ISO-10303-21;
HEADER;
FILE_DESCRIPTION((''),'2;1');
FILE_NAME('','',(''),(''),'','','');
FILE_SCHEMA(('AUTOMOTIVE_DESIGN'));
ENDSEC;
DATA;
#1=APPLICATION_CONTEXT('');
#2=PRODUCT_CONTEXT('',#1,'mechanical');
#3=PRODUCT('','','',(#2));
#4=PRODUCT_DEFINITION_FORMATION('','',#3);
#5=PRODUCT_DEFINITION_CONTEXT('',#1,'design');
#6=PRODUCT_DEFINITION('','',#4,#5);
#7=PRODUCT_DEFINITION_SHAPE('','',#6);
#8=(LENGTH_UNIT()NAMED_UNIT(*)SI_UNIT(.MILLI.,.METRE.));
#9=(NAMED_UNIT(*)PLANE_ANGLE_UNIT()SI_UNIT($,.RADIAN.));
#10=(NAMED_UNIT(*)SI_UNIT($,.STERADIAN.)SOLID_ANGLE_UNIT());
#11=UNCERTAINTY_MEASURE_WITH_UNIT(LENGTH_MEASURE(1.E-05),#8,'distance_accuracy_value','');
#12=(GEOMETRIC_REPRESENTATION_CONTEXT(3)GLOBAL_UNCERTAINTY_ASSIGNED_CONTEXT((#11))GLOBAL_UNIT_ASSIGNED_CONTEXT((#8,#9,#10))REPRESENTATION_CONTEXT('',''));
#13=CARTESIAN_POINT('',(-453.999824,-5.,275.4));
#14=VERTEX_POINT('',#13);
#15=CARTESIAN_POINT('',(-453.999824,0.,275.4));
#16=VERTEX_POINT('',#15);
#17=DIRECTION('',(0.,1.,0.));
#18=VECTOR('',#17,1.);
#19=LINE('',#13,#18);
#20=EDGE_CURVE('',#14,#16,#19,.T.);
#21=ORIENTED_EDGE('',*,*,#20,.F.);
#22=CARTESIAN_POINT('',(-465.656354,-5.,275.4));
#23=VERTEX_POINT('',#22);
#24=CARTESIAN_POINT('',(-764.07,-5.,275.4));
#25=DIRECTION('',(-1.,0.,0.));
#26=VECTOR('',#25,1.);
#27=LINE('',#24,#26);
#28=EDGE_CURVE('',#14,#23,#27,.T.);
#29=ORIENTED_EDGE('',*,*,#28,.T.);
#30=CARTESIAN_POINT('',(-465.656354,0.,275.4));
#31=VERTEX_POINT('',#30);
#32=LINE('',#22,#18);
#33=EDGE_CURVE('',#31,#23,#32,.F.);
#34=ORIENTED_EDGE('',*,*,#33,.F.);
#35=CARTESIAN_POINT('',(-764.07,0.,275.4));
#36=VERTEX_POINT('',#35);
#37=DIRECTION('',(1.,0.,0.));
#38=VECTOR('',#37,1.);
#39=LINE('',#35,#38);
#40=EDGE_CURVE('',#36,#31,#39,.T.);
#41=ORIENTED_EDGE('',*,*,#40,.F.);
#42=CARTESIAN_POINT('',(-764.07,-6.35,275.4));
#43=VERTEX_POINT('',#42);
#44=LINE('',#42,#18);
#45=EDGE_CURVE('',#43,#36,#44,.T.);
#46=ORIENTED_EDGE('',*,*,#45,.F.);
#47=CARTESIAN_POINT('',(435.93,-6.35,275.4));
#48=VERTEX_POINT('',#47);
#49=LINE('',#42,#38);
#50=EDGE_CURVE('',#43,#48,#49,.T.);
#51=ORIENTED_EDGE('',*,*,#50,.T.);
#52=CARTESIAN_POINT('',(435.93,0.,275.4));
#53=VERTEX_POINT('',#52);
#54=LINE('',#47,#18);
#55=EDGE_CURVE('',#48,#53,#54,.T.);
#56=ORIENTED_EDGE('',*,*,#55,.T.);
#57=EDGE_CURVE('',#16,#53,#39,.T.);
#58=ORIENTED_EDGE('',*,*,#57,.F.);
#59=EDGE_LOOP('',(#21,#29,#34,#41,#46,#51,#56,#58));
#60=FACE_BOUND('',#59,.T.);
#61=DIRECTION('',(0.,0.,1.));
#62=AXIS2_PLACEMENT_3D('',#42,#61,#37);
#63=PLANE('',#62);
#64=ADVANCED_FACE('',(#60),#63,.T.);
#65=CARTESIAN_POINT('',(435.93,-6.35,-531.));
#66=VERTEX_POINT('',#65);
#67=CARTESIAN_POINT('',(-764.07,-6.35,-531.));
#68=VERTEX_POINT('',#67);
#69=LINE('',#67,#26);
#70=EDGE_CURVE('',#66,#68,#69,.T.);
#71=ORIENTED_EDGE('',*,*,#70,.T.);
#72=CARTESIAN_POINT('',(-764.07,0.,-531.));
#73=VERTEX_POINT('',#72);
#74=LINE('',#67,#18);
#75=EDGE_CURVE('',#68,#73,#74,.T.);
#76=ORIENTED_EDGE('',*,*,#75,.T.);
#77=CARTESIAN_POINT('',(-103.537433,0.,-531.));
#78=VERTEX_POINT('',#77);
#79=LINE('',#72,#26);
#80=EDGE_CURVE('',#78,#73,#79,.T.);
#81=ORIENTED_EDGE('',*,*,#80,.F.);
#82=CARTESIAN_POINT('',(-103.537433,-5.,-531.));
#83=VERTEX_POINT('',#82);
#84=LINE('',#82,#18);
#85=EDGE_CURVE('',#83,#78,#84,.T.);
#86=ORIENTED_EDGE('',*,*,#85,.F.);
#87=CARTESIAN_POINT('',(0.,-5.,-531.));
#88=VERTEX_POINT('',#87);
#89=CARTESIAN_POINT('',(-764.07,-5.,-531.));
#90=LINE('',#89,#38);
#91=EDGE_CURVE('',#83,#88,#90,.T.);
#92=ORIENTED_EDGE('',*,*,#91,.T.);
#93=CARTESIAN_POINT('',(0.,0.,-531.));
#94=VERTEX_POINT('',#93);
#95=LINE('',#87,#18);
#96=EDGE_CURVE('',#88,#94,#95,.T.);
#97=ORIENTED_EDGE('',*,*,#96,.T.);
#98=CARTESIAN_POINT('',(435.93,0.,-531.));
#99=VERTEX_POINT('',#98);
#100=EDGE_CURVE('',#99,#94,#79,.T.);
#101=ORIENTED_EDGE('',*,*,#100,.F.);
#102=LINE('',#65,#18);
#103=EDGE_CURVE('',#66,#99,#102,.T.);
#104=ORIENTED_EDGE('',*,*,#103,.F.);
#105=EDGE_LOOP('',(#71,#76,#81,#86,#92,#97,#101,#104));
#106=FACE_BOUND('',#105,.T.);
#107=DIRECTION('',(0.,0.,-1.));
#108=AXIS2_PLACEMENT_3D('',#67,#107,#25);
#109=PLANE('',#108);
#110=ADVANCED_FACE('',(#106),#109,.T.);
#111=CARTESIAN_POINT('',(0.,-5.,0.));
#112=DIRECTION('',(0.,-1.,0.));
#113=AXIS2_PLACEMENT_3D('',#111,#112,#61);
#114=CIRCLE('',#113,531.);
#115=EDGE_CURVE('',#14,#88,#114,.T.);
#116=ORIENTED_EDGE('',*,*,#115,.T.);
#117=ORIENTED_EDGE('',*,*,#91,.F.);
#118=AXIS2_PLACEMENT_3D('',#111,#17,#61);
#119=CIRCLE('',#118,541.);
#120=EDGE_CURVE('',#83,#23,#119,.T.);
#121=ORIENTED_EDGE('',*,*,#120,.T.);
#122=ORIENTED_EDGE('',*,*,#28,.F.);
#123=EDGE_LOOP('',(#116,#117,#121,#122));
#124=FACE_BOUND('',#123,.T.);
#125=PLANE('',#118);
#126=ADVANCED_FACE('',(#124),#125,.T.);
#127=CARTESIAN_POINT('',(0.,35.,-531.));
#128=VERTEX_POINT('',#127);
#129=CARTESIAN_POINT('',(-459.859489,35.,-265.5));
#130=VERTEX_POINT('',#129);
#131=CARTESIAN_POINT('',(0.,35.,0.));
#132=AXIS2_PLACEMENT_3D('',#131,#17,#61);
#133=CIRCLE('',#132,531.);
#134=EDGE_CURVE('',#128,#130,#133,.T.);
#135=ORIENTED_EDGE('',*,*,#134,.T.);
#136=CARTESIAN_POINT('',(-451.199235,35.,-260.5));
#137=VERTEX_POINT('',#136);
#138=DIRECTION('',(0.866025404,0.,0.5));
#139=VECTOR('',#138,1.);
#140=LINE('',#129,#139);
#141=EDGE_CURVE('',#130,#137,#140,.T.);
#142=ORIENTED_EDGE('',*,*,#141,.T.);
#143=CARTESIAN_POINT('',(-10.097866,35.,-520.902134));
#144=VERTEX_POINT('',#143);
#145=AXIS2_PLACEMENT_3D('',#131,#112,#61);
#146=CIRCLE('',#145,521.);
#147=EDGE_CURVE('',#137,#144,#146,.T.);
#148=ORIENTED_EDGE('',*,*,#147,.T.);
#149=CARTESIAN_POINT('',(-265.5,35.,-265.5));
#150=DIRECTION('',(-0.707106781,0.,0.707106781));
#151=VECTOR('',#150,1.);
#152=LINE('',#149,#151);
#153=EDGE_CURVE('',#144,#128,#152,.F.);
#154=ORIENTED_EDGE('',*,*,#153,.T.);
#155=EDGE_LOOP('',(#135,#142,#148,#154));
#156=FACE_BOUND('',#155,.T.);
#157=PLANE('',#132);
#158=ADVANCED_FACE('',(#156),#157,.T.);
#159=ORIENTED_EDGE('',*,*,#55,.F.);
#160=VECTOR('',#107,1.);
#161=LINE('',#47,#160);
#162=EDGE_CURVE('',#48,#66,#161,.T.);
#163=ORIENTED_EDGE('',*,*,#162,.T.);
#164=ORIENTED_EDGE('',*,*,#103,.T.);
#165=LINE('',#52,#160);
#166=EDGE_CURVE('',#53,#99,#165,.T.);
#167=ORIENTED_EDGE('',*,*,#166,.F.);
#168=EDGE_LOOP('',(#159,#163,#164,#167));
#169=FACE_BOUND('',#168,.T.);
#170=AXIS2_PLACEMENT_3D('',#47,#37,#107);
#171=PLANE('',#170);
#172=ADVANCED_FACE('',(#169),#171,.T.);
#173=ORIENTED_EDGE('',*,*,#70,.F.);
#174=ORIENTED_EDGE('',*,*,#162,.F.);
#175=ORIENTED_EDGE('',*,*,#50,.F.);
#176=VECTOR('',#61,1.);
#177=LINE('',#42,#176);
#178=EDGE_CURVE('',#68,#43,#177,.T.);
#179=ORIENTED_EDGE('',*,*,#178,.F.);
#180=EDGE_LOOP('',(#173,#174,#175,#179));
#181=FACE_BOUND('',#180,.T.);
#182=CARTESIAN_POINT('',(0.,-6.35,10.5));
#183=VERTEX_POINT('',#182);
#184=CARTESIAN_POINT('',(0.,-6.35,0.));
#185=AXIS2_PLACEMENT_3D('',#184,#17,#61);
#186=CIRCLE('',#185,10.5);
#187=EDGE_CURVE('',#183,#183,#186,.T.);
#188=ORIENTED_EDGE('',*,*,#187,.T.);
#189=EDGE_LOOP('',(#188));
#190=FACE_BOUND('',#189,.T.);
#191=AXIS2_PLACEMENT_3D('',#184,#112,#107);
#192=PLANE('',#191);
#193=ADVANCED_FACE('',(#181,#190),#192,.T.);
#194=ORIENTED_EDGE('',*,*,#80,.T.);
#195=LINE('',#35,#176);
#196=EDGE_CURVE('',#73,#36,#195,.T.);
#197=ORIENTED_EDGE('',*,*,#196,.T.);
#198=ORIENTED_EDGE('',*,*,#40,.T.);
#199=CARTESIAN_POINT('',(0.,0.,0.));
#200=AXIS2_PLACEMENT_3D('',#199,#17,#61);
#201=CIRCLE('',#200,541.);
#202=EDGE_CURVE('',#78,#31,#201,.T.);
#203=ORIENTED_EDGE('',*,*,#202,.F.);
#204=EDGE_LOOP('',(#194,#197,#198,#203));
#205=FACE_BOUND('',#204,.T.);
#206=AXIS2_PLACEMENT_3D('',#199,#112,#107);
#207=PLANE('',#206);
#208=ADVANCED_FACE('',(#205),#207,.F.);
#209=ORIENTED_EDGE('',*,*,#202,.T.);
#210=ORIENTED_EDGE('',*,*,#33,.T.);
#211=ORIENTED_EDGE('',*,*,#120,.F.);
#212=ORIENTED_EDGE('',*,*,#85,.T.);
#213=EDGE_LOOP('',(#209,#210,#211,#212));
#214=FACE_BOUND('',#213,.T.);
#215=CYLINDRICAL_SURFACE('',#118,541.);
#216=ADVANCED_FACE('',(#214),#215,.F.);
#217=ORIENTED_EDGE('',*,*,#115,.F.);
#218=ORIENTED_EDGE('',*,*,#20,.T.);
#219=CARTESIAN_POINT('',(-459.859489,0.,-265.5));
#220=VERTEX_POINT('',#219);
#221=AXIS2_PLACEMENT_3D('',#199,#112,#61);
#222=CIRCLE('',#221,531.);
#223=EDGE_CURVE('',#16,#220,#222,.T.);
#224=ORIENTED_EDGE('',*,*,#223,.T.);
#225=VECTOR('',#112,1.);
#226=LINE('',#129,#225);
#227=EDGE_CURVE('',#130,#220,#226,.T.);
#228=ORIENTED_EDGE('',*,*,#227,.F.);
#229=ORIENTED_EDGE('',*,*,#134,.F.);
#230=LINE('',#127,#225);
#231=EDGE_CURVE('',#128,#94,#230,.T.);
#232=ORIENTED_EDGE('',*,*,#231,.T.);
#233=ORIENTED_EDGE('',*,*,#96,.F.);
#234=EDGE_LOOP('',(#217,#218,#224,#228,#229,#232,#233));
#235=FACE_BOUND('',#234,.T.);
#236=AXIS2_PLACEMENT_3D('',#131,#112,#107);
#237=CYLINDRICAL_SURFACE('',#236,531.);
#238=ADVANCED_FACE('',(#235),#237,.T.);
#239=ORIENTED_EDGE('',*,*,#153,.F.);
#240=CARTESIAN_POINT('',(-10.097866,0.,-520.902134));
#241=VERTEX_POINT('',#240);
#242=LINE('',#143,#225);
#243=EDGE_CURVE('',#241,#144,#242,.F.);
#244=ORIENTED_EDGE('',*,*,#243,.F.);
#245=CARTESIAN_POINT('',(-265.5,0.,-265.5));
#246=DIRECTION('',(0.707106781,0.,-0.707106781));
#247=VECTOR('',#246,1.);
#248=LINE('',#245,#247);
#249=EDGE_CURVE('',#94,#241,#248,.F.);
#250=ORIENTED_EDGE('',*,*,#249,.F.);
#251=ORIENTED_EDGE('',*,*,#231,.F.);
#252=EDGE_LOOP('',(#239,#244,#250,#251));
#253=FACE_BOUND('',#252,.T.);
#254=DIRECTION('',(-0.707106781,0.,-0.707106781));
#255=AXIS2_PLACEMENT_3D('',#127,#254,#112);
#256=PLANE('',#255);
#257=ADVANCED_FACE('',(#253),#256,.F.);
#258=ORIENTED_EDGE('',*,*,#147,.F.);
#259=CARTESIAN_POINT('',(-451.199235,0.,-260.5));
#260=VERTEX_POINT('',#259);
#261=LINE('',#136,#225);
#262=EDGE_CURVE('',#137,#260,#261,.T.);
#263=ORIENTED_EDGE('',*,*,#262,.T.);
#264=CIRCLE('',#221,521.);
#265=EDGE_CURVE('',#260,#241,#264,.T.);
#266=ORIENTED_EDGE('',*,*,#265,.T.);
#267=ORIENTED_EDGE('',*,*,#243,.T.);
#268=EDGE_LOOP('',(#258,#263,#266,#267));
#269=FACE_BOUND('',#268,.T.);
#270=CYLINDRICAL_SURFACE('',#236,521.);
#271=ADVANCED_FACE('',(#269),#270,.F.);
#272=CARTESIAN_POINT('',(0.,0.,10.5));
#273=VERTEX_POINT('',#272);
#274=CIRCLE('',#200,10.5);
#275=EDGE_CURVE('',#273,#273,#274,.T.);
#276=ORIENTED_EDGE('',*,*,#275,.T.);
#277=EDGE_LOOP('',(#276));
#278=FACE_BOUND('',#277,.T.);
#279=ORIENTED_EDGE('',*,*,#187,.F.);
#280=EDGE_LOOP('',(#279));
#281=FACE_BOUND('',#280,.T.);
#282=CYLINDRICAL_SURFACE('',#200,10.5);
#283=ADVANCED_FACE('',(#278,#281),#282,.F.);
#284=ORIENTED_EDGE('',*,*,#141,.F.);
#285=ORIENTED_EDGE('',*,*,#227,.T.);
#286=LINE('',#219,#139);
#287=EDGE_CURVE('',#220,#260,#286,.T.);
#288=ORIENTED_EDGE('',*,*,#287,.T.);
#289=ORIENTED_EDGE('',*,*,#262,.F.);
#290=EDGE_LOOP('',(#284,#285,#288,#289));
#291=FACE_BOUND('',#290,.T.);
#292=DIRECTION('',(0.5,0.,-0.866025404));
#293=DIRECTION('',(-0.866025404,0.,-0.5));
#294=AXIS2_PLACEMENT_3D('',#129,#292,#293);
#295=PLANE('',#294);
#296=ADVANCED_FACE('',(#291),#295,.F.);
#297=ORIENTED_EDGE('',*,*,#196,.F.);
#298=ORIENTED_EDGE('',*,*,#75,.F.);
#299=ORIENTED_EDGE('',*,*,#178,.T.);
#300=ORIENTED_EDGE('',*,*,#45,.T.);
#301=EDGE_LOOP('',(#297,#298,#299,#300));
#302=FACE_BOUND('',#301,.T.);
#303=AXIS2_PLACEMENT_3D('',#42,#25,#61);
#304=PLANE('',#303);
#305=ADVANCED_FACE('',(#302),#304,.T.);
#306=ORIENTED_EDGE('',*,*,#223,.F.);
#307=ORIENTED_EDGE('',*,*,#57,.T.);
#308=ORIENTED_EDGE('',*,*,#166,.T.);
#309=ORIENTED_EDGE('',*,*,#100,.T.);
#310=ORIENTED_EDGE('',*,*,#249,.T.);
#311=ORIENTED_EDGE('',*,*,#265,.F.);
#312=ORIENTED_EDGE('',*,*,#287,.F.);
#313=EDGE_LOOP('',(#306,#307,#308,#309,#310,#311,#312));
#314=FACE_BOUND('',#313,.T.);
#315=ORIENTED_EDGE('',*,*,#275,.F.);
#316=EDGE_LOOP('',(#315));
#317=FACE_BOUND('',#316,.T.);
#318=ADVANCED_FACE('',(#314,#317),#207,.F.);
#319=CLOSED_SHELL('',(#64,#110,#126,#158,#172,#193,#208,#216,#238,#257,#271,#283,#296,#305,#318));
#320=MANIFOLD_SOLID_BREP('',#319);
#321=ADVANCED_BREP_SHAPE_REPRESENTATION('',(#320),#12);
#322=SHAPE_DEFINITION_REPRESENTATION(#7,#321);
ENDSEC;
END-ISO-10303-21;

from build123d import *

# Parameters (mm, degrees)
BOSS_EXTRUDE1_DEPTH    = 35
SKETCH4_W              = 1200
SKETCH4_H              = 806.4
BOSS_EXTRUDE2_DEPTH    = 6.35
CHAMFER1_SIZE          = 10
F_20_0MM_DOWEL_HOLE1_D = 21
CUT_EXTRUDE1_START     = -5
CUT_EXTRUDE1_DEPTH     = 5


with BuildPart() as part:
    # Sketch3 → Boss-Extrude1 (new body)
    with BuildSketch(Plane(origin=(0, 0, 0), x_dir=(1, 0, 0), z_dir=(0, 1, 0))):
        with BuildLine():
            Line((0, 531), (0, 521))
            ThreePointArc((0, 521), (-260.5, 451.199235372), (-451.199235372, 260.5))
            Line((-451.199235372, 260.5), (-459.85948941, 265.5))
            ThreePointArc((-459.85948941, 265.5), (-265.5, 459.85948941), (0, 531))
        make_face()
    extrude(amount=BOSS_EXTRUDE1_DEPTH)

    # Sketch4 → Boss-Extrude2 (add)
    with BuildSketch(Plane(origin=(0, 0, 0), x_dir=(1, 0, 0), z_dir=(0, 1, 0))):
        with Locations((-164.07, 127.8)):
            Rectangle(SKETCH4_W, SKETCH4_H)
    extrude(amount=-BOSS_EXTRUDE2_DEPTH)

    # Chamfer1
    # the kernel refuses this chamfer: 10 mm, written as the material it takes off along each edge
    with BuildSketch(Plane(origin=(0, 0, -521), x_dir=(-0.999953038196086, 0, 0.009691305506332204), z_dir=(0, 1, 0))) as chamfer1_piece_1:
        with BuildLine():
            Line((10.098340338, 0), (-CHAMFER1_SIZE * 0.00969130550632, -CHAMFER1_SIZE * 0.999953038196))
            Line((-CHAMFER1_SIZE * 0.00969130550632, -CHAMFER1_SIZE * 0.999953038196), (0, 0))
            ThreePointArc((0, 0), (5.192000536, -0.024447522), (10.098340338, 0))
        make_face()
    extrude(amount=60.969219121, mode=Mode.SUBTRACT)

    # Ø20.0mm Dowel Hole1 (through all)
    with Locations(Plane(origin=(0, 0, 0), x_dir=(1, 0, 0), z_dir=(0, 1, 0))):
        with Locations((0, 0)):
            Hole(F_20_0MM_DOWEL_HOLE1_D / 2)

    # Sketch8 → Cut-Extrude1 (cut)
    with BuildSketch(Plane(origin=(0, 0, 0), x_dir=(1, 0, 0), z_dir=(0, 1, 0)).offset(CUT_EXTRUDE1_START)):
        with BuildLine():
            Line((-462.549726308, -280.586440678), (-453.999823789, -275.4))
            ThreePointArc((-453.999823789, -275.4), (-462.708547576, 260.502975031), (0, 531))
            Line((0, 531), (0, 541))
            ThreePointArc((0, 541), (-471.422456193, 265.408869099), (-462.549726308, -280.586440678))
        make_face()
    extrude(amount=CUT_EXTRUDE1_DEPTH, mode=Mode.SUBTRACT)


solid = part.part
